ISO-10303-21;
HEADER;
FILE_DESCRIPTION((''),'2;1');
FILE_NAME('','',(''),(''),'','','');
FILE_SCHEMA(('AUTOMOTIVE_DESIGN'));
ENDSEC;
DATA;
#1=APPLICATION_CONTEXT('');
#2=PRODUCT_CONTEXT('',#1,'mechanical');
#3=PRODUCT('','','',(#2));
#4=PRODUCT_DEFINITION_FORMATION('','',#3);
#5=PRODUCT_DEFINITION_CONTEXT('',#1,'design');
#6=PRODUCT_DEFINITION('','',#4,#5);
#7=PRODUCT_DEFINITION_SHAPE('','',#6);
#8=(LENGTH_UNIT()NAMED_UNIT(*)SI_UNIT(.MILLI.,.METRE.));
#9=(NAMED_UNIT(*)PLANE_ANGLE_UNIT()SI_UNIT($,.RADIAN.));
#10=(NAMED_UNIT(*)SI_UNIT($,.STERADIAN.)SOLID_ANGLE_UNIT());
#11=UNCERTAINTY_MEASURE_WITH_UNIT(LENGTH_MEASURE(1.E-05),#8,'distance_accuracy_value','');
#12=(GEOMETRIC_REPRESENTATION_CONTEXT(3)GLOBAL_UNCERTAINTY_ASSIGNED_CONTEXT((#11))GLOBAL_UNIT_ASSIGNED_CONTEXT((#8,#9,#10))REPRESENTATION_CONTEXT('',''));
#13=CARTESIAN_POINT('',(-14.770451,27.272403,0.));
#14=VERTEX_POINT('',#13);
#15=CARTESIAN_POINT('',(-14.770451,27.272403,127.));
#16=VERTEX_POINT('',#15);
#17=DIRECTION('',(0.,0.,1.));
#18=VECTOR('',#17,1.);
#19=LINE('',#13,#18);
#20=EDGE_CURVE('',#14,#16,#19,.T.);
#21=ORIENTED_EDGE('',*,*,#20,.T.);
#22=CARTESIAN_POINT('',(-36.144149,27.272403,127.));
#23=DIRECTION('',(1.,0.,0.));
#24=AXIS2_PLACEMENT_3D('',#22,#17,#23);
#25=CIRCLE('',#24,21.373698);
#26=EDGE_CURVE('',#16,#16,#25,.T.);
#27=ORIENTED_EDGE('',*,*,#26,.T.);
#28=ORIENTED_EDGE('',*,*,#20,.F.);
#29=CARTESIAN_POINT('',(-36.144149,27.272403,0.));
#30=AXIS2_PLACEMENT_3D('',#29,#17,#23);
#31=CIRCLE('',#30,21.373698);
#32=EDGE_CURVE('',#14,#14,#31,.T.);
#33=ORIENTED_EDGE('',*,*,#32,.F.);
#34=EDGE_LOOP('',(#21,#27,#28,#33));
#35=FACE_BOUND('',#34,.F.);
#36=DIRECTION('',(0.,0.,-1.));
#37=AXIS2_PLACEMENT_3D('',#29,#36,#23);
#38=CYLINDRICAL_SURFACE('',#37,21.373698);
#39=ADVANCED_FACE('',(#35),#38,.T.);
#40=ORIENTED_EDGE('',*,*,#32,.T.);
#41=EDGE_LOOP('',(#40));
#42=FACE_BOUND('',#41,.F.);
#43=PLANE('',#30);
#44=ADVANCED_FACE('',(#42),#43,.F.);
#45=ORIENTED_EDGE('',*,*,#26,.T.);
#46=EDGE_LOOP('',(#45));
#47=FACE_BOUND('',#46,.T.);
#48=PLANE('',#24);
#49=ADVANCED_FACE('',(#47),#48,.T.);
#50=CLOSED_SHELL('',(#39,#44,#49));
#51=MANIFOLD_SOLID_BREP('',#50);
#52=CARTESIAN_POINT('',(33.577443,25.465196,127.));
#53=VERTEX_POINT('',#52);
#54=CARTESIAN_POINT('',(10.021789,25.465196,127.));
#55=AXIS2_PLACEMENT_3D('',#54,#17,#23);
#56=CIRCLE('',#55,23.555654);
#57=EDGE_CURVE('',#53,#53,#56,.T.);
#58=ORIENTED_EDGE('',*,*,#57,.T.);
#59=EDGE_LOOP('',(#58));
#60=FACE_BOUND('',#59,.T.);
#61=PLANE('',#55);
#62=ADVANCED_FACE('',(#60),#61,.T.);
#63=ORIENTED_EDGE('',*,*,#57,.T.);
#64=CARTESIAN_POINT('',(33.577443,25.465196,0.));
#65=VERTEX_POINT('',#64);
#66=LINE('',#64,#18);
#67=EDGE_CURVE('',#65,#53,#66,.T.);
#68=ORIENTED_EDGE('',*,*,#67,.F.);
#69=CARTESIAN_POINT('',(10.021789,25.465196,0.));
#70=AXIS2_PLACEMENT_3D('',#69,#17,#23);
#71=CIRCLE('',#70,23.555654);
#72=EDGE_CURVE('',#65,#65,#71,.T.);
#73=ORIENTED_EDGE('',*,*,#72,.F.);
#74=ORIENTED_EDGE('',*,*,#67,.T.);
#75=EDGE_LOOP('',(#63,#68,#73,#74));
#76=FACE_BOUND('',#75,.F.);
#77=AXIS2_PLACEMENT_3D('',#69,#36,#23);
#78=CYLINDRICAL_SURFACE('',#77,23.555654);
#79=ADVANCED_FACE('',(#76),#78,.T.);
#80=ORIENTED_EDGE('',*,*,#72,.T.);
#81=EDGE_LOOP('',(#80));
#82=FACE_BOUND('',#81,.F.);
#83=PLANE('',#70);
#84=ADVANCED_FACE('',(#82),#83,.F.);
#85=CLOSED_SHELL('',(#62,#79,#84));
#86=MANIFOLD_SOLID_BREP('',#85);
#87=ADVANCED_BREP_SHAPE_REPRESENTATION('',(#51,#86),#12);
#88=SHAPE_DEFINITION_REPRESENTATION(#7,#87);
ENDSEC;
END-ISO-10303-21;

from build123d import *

# Parameters (mm, degrees)
F0_R     = 21.3736978342
F1_DEPTH = 127
F0_R_2   = 23.5556539699


# Not quite as in the source:
# - the program builds the solid bodies; features that only make, move or delete a surface that nothing else refers to are left out


with BuildPart() as f1:
    # F0 (on Top) → F1 (new body)
    with BuildSketch(Plane.XY):
        with Locations((-36.1441485584, 27.2724032402)):
            Circle(F0_R)
    extrude(amount=F1_DEPTH)


with BuildPart() as f1b:
    # F0 (on Top) → F1, piece 2 (new body)
    with BuildSketch(Plane.XY):
        with Locations((10.0217889994, 25.4651959985)):
            Circle(F0_R_2)
    extrude(amount=F1_DEPTH)


solid = Compound([f1.part, f1b.part])
